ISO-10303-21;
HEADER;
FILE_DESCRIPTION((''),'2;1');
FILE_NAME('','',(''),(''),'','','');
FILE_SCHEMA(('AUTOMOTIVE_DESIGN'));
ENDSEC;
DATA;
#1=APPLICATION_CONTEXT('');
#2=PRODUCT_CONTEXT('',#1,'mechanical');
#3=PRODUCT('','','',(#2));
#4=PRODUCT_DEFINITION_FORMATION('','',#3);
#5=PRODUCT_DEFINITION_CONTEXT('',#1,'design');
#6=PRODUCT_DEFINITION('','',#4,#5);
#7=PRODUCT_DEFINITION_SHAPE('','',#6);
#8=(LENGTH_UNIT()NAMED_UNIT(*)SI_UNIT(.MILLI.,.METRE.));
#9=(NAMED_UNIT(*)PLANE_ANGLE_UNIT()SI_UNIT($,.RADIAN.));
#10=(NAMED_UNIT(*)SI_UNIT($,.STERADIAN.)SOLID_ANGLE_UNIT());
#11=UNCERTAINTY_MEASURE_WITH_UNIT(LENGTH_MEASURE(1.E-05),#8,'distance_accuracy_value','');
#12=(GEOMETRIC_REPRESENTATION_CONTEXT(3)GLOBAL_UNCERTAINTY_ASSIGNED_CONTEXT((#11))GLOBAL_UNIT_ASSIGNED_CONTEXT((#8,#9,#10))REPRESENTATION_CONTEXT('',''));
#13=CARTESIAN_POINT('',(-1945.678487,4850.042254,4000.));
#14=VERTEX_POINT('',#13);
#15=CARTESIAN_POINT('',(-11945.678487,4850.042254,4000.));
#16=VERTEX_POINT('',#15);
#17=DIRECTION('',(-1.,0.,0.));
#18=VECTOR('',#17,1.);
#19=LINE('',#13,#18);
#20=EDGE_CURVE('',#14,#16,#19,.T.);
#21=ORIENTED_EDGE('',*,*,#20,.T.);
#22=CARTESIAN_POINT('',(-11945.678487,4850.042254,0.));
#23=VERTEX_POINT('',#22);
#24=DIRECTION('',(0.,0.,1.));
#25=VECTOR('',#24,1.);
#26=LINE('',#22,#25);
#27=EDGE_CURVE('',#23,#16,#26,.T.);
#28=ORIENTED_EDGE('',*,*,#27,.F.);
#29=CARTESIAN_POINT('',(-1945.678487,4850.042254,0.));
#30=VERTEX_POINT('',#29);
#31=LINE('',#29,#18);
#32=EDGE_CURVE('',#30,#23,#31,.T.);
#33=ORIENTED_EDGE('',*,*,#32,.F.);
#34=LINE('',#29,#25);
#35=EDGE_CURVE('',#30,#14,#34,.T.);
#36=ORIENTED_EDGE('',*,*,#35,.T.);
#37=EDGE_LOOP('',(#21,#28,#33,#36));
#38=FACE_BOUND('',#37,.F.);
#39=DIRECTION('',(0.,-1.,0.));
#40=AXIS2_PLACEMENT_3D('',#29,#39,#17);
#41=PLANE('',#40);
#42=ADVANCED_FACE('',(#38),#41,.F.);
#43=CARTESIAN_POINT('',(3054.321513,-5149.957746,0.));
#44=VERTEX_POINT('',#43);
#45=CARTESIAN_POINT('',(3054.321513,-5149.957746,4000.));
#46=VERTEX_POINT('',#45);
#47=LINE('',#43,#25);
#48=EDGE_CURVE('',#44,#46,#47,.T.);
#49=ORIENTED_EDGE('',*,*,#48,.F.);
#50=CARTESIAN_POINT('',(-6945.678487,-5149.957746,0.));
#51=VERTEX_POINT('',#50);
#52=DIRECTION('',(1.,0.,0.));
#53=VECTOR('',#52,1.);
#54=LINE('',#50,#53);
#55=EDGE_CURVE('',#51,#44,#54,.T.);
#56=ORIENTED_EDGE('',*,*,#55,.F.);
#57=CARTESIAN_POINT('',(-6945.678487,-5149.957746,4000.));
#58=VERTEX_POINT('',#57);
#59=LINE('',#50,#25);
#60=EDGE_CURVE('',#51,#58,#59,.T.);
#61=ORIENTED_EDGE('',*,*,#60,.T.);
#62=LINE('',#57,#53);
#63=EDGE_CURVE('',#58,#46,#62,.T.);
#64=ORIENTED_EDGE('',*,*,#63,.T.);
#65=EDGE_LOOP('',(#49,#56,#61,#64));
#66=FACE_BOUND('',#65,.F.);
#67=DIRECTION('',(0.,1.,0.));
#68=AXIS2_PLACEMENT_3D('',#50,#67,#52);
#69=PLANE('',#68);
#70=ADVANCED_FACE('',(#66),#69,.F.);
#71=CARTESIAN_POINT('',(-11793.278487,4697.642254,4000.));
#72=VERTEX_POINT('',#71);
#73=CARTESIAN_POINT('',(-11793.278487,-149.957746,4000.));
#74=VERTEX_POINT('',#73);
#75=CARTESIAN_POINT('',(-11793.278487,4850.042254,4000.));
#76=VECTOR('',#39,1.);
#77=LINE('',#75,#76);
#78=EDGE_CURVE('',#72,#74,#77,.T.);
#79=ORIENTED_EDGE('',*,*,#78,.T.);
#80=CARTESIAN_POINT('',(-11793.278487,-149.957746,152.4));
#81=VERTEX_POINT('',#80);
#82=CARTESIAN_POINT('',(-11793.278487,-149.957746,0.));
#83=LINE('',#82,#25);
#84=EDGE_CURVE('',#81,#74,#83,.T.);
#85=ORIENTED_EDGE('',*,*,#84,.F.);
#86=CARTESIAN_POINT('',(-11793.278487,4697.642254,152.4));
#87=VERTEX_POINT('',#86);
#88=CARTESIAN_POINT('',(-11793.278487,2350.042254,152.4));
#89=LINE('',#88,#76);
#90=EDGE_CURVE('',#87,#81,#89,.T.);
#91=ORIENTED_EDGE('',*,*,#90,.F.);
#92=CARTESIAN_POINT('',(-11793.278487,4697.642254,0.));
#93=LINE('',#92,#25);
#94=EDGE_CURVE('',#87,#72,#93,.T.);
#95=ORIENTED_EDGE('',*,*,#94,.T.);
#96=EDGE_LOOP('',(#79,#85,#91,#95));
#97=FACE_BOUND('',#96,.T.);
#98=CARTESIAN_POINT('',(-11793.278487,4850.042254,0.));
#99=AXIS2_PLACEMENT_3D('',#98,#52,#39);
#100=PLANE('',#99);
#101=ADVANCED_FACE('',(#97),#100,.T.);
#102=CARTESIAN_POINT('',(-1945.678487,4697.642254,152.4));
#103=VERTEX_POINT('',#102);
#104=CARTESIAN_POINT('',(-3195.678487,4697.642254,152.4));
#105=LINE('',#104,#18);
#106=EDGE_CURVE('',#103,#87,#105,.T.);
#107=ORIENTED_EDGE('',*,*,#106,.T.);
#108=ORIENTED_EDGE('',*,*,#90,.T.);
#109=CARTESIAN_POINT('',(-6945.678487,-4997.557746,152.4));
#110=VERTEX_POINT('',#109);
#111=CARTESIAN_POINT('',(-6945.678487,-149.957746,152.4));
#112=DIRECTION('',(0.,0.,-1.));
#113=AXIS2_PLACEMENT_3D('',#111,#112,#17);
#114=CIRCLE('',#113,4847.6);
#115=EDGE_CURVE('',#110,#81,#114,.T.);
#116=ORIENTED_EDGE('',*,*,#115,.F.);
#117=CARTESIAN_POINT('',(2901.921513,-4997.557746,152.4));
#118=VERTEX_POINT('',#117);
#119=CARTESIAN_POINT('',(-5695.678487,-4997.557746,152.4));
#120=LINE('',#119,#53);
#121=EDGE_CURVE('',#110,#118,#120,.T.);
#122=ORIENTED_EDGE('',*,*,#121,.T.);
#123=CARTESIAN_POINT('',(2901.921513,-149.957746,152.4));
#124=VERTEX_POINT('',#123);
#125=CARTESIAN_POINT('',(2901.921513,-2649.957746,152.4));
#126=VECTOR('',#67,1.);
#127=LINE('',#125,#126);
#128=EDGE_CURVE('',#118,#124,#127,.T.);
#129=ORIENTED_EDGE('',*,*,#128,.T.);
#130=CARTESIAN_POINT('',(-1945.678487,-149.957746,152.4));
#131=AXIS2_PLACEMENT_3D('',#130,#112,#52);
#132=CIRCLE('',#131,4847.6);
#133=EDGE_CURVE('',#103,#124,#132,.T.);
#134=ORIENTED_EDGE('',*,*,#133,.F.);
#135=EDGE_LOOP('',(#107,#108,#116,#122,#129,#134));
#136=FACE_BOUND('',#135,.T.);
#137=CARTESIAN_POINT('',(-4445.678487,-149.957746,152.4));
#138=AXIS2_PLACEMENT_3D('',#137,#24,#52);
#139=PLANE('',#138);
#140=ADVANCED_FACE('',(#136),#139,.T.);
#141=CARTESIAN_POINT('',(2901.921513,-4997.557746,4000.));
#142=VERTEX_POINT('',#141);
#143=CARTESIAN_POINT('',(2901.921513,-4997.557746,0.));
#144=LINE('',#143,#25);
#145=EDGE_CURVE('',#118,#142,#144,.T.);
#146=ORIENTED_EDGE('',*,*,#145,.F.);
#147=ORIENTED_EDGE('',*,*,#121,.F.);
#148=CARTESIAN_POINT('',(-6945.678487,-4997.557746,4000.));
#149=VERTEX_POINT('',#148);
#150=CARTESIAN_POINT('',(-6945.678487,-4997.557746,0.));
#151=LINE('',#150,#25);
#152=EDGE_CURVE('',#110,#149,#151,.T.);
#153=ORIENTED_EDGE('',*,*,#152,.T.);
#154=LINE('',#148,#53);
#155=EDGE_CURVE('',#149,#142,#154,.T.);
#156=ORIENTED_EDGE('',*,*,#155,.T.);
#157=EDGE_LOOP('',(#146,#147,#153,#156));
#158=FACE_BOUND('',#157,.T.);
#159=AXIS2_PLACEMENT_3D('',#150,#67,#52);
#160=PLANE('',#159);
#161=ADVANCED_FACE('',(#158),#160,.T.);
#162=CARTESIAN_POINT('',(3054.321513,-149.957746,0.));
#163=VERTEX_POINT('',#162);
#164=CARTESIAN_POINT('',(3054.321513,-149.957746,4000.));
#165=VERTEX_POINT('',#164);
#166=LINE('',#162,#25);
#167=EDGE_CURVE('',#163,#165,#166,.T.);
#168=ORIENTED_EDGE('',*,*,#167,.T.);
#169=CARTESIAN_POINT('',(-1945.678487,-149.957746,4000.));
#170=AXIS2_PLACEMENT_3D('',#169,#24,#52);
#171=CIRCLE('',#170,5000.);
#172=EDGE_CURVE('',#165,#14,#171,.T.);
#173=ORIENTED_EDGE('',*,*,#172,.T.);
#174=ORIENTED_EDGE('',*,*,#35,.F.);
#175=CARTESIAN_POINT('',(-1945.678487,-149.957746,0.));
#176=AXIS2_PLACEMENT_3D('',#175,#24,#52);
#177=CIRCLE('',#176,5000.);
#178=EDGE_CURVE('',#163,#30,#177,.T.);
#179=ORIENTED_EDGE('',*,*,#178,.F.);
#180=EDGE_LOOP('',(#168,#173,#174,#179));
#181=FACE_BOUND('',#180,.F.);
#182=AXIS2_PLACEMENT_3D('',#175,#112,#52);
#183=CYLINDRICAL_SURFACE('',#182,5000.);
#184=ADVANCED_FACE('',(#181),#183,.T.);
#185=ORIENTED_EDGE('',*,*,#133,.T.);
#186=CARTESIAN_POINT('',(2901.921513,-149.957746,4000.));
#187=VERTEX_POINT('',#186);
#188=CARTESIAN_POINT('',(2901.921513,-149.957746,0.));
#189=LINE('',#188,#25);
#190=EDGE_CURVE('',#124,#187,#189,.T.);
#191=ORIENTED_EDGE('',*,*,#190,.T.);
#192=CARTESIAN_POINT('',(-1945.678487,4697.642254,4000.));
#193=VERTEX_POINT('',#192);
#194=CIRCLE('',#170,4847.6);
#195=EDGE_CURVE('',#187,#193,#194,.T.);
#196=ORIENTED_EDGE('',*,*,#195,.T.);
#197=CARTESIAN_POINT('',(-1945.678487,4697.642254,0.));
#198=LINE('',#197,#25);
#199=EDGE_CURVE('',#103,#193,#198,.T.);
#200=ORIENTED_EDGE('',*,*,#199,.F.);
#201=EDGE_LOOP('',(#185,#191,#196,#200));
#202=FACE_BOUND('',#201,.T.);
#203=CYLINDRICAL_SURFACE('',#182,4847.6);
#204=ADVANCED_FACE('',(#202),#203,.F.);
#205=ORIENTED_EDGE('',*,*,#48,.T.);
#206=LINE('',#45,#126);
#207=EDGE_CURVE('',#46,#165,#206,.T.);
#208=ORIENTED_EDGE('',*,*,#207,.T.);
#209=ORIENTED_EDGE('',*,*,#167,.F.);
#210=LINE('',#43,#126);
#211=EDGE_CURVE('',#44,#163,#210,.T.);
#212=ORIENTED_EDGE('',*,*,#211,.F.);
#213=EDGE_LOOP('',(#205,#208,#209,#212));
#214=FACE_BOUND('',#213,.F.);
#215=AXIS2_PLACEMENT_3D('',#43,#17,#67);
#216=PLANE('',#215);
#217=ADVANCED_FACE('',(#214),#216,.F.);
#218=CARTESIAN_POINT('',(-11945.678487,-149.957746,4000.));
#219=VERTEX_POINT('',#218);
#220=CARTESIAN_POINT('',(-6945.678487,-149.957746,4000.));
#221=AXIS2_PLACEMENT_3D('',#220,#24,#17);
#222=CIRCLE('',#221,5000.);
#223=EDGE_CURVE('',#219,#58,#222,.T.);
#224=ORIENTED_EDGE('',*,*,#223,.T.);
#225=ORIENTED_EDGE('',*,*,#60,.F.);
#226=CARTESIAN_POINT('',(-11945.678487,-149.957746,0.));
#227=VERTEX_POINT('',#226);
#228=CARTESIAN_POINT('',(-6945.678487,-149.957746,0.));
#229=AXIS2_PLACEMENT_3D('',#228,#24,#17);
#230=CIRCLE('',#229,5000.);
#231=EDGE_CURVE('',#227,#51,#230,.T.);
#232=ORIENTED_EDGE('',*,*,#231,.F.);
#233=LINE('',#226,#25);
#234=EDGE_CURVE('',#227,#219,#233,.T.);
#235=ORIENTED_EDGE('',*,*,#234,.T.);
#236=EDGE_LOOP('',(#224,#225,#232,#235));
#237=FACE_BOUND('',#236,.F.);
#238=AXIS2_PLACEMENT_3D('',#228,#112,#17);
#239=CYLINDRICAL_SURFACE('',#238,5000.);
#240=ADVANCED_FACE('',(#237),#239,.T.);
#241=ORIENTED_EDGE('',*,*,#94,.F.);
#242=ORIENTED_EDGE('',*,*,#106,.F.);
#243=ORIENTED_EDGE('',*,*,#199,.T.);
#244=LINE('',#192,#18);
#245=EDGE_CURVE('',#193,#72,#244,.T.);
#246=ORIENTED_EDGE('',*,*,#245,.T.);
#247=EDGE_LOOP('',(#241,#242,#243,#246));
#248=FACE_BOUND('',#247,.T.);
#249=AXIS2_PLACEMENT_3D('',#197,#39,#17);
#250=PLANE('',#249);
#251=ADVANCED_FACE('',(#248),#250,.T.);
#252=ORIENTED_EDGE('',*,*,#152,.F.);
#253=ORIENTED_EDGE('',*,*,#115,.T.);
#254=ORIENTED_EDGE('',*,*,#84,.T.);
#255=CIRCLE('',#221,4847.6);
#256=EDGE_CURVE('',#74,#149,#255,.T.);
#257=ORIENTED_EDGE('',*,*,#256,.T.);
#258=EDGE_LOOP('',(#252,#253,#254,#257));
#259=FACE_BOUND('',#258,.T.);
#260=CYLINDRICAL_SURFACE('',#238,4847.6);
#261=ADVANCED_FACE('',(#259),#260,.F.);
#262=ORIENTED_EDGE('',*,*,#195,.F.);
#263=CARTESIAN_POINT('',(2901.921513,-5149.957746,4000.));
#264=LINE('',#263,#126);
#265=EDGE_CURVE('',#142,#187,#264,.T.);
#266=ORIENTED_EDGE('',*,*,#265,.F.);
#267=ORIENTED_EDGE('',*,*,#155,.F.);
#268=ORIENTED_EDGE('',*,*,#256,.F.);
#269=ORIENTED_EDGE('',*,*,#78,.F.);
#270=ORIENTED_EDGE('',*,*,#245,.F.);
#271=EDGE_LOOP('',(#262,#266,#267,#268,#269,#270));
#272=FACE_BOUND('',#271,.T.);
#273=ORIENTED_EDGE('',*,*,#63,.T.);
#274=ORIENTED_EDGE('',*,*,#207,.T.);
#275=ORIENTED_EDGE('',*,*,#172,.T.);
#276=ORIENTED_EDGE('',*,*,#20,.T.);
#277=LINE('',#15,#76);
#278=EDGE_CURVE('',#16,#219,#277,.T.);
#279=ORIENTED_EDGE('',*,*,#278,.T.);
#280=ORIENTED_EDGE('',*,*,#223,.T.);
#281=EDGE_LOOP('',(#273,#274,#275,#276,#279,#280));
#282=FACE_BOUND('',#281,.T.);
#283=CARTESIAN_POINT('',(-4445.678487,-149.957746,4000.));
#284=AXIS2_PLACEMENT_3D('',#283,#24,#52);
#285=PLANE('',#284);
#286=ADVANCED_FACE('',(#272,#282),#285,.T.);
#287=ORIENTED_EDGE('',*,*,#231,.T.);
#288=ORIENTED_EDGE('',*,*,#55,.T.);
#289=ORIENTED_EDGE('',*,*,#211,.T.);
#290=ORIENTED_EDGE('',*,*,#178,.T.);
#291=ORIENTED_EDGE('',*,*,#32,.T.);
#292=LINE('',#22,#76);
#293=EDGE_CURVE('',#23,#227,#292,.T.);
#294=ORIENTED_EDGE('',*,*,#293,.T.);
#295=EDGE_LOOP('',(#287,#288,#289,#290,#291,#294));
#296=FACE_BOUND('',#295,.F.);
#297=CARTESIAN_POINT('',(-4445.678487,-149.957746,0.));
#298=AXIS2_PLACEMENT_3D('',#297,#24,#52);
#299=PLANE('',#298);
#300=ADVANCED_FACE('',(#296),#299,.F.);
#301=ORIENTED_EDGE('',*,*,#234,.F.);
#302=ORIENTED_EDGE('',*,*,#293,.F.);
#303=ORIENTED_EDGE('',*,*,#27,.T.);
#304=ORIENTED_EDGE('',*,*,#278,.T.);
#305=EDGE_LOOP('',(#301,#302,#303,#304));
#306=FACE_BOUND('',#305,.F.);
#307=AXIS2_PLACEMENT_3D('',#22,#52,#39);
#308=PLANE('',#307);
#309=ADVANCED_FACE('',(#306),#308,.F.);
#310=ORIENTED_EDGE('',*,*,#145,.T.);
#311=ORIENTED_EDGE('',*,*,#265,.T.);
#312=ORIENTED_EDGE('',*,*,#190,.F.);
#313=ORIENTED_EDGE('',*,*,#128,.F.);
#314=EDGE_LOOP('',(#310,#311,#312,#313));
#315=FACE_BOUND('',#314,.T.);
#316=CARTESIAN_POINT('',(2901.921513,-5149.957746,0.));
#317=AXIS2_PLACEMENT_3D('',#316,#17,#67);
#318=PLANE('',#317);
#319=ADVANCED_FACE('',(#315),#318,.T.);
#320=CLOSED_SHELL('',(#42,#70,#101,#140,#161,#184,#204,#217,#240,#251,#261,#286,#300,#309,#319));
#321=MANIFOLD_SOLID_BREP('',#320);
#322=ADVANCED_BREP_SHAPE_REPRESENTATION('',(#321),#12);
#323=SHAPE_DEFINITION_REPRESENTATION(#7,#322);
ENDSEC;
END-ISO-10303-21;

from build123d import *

# Parameters (mm, degrees)
F1_DEPTH = 4000
F2_T     = -152.4


# Not quite as in the source:
# - the program builds the solid bodies; features that only make, move or delete a surface that nothing else refers to are left out


with BuildPart() as f1:
    # F0 (on Top) → F1 (new body)
    with BuildSketch(Plane.XY):
        with BuildLine():
            Line((-1945.6784874201, 4850.0422537327), (-11945.6784874201, 4850.0422537327))
            Line((-11945.6784874201, 4850.0422537327), (-11945.6784874201, -149.9577462673))
            ThreePointArc((-11945.6784874201, -149.9577462673), (-10481.2123933528, -3685.4916522001), (-6945.6784874201, -5149.9577462673))
            Line((-6945.6784874201, -5149.9577462673), (3054.3215125799, -5149.9577462673))
            Line((3054.3215125799, -5149.9577462673), (3054.3215125799, -149.9577462673))
            ThreePointArc((3054.3215125799, -149.9577462673), (1589.8554185127, 3385.5761596654), (-1945.6784874201, 4850.0422537327))
        make_face()
    extrude(amount=F1_DEPTH)

    # F2
    f2_openings = [f1.faces().sort_by_distance(p)[0] for p in [
        (-4445.678487, -149.957746, 4000),
    ]]
    offset(amount=F2_T, openings=f2_openings)


solid = f1.part
